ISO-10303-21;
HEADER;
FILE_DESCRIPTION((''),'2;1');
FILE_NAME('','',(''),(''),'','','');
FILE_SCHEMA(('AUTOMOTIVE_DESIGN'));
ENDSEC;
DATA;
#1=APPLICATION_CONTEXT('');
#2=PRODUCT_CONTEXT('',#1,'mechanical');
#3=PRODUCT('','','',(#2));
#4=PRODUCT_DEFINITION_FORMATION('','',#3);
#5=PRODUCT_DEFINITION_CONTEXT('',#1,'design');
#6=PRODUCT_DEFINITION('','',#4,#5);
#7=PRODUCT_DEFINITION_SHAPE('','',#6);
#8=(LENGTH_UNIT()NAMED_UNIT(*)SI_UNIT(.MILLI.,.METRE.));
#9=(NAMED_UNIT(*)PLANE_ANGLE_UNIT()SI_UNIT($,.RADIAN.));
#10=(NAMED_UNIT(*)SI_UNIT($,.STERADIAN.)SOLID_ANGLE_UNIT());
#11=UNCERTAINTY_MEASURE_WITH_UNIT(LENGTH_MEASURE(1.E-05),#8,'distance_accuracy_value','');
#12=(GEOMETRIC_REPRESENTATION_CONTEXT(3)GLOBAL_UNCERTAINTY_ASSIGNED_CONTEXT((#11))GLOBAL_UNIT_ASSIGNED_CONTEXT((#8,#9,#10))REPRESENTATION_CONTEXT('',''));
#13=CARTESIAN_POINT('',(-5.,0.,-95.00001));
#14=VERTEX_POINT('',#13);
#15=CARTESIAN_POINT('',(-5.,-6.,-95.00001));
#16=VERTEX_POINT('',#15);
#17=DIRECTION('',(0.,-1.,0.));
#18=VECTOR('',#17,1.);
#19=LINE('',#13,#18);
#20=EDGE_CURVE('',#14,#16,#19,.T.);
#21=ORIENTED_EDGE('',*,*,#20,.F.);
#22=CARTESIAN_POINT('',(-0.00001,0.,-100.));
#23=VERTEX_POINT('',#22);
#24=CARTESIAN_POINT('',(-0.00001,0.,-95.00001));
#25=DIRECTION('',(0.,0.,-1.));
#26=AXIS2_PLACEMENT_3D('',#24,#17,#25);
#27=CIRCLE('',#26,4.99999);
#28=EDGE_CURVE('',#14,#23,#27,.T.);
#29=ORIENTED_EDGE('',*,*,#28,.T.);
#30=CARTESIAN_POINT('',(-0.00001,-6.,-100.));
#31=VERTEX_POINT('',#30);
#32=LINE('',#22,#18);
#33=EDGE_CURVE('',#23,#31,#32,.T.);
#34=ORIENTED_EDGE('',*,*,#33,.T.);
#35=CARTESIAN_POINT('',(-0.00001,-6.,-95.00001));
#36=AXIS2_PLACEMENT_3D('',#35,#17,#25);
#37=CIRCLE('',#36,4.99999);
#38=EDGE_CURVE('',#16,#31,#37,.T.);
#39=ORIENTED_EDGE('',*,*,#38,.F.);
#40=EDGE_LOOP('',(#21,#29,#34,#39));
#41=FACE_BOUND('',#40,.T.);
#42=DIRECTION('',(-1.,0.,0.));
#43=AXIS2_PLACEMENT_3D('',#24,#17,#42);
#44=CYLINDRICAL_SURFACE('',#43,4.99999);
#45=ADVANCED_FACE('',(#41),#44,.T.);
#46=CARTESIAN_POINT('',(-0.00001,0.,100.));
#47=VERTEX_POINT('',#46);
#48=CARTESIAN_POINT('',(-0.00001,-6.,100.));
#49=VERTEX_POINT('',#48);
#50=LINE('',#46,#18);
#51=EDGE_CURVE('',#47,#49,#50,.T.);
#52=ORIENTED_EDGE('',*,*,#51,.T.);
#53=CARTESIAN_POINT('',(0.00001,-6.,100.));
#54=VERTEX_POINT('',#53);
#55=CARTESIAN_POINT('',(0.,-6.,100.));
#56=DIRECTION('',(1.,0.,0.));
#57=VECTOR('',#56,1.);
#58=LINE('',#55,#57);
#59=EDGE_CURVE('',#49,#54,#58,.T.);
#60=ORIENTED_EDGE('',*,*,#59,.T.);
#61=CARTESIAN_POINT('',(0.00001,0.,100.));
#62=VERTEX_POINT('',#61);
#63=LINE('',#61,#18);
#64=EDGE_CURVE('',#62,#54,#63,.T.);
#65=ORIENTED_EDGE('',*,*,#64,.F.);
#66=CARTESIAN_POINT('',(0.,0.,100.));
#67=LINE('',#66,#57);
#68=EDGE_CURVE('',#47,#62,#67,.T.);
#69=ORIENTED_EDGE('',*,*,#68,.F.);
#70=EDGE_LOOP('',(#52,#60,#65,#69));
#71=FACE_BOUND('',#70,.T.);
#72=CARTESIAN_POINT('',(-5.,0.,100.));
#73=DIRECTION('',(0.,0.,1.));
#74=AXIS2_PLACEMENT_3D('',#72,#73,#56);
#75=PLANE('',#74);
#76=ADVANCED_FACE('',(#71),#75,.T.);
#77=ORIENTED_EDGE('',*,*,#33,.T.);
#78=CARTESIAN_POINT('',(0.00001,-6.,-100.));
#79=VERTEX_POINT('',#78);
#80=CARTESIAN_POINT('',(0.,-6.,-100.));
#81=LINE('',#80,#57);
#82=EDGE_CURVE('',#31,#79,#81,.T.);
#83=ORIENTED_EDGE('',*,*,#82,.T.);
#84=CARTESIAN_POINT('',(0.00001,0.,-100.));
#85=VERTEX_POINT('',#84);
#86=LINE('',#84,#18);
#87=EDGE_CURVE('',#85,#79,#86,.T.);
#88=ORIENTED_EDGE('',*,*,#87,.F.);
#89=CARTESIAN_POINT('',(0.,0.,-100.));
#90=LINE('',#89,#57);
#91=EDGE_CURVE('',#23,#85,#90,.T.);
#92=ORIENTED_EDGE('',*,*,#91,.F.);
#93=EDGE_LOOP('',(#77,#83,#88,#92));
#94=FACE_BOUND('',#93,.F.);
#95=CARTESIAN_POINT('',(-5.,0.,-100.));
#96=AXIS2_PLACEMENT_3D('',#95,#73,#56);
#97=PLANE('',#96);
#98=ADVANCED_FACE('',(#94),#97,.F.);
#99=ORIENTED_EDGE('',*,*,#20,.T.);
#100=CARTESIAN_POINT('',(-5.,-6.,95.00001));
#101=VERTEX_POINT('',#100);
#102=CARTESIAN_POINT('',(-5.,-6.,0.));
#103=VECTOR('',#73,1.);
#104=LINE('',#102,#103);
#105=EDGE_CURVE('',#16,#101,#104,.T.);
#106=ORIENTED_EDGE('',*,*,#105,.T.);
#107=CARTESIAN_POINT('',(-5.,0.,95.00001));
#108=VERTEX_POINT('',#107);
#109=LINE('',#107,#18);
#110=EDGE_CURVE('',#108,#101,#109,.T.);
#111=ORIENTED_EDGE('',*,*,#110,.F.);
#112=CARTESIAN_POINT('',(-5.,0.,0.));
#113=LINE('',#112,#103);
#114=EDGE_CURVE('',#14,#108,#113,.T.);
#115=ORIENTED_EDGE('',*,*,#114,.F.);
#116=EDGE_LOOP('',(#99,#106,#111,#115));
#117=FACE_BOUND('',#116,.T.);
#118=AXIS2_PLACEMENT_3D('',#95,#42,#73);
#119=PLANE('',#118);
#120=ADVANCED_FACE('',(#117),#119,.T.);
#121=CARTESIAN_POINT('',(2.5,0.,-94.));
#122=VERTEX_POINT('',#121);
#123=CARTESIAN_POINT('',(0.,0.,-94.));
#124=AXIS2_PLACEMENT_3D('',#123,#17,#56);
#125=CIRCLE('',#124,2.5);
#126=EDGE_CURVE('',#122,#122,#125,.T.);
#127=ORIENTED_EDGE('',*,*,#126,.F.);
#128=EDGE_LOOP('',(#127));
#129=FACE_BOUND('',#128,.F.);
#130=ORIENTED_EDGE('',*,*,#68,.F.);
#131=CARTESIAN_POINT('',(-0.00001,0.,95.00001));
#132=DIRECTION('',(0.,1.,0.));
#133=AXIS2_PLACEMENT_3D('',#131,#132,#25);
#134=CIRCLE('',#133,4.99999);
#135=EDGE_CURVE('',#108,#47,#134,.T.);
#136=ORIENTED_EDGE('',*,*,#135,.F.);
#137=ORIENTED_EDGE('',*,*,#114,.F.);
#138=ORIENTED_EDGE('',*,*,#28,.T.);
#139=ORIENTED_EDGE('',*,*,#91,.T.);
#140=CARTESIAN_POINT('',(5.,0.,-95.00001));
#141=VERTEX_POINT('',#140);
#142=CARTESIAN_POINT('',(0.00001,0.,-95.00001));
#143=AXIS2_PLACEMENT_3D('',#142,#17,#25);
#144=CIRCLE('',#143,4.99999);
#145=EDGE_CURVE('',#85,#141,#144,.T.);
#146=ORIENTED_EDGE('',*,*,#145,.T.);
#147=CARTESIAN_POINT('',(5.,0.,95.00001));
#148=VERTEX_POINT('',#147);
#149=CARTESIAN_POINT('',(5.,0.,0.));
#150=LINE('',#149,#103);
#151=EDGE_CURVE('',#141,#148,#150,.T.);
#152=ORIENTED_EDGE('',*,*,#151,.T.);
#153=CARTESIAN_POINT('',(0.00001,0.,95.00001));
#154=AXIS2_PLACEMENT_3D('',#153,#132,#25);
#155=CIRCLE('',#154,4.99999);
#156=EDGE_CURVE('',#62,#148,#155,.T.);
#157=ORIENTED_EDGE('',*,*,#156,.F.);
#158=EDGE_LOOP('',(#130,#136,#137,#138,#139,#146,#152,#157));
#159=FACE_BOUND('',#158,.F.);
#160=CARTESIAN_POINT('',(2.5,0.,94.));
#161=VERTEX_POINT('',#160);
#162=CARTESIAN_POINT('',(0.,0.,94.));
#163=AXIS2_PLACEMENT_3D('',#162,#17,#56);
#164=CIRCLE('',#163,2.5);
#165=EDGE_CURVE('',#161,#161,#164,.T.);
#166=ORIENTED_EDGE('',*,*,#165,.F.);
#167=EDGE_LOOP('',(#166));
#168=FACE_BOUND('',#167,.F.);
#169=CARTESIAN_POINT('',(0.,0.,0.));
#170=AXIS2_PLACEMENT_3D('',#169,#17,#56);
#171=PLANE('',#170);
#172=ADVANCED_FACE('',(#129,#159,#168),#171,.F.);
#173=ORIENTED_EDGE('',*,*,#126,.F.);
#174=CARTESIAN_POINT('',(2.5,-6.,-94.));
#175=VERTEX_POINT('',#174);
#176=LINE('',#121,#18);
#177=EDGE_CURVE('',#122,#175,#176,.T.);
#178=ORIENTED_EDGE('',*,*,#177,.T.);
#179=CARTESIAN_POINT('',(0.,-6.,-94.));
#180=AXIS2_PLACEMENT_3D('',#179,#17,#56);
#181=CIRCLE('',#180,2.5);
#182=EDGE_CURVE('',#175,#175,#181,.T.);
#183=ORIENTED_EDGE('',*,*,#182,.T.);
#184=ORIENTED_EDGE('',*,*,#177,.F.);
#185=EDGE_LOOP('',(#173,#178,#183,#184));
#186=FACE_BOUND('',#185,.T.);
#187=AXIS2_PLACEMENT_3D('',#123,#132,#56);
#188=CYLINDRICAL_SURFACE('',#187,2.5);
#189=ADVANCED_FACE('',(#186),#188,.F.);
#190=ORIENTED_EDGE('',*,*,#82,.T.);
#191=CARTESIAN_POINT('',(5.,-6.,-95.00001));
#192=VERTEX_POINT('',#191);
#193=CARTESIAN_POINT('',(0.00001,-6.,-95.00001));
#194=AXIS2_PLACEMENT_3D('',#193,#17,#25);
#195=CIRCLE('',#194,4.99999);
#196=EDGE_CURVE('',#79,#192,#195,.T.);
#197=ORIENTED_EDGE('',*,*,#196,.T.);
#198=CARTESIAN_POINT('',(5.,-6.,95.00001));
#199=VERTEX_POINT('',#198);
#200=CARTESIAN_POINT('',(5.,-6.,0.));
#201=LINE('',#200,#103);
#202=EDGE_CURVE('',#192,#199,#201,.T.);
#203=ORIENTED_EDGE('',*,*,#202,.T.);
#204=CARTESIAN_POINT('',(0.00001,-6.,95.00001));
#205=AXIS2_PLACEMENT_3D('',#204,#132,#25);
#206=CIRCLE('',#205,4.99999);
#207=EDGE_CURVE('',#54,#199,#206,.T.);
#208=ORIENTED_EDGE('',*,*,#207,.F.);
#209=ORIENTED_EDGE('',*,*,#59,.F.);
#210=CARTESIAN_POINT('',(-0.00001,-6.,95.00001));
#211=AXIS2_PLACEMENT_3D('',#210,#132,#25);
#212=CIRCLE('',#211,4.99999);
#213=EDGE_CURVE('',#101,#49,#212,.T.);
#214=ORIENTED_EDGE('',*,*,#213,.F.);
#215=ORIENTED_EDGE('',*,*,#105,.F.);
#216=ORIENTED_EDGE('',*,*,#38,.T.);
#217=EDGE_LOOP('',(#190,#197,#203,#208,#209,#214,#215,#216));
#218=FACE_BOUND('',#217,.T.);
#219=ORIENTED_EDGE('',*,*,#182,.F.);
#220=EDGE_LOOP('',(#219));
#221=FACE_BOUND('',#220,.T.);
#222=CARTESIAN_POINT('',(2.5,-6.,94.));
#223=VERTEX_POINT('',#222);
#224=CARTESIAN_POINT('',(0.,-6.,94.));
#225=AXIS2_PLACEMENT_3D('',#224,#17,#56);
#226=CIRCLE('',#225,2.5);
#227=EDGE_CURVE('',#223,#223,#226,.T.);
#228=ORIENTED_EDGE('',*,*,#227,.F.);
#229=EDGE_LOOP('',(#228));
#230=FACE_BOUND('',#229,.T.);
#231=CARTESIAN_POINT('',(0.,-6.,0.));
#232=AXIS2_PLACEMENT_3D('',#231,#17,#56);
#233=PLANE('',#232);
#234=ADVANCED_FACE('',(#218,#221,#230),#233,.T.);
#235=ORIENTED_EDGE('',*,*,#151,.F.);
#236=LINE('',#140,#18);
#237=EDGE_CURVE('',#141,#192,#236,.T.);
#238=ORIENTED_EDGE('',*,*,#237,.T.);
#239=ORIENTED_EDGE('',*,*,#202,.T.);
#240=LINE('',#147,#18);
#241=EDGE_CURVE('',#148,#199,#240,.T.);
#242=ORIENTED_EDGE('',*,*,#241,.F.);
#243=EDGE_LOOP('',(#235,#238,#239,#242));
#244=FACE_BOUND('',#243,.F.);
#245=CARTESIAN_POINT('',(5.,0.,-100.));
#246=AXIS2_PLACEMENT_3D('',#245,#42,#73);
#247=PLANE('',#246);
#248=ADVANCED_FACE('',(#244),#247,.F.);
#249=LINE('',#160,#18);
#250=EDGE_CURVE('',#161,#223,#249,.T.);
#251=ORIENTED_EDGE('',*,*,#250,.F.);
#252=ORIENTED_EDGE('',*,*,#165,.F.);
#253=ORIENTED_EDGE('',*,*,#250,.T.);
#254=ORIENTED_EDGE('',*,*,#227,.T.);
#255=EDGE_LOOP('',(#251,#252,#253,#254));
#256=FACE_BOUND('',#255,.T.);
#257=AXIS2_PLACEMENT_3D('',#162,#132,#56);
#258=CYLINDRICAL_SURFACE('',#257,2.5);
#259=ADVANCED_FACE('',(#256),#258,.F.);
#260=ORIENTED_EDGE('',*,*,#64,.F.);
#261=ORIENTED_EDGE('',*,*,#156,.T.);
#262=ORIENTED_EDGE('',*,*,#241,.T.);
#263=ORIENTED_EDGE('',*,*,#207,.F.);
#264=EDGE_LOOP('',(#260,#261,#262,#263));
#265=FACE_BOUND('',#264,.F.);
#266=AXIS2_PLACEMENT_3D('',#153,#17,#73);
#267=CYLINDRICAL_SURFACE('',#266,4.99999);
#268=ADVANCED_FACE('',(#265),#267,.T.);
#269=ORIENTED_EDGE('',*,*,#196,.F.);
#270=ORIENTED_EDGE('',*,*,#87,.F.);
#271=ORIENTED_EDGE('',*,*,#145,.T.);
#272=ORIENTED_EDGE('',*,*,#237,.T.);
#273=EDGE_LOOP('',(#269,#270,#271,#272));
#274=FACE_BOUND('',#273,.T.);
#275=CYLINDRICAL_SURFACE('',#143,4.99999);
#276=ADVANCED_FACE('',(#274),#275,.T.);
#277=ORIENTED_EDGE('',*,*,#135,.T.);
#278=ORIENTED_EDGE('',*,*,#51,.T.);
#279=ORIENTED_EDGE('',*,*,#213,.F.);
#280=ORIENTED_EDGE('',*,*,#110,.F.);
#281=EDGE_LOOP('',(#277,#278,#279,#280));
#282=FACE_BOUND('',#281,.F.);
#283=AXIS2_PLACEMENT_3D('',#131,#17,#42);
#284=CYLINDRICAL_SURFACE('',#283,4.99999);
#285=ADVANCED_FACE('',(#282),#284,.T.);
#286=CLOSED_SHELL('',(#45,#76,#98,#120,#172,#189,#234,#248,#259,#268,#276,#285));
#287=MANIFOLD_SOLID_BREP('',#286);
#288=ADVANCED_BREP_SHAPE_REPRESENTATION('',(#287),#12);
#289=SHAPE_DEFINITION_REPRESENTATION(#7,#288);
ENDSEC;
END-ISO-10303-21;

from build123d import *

# Parameters (mm, degrees)
F0_W     = 10
F0_H     = 200
F0_R     = 2.5
F1_DEPTH = 6
F2_R     = 4.99999


# Not quite as in the source:
# - a fillet or chamfer is up to 0.001 mm smaller than in the source, because OpenCascade refuses the exact size


with BuildPart() as f1:
    # F0 (on Front) → F1 (new body)
    with BuildSketch(Plane.XZ):
        Rectangle(F0_W, F0_H)
        with Locations((0, -94)):
            Circle(F0_R, mode=Mode.SUBTRACT)
        with Locations((0, 94)):
            Circle(F0_R, mode=Mode.SUBTRACT)
    extrude(amount=F1_DEPTH)

    # F2 (radius 5 in the source; OpenCascade refuses exactly that, so slightly less here)
    f2_edges = [f1.edges().sort_by_distance(p)[0] for p in [
        (-5, -3, 100),
        (5, -3, 100),
        (5, -3, -100),
        (-5, -3, -100),
    ]]
    fillet(f2_edges, radius=F2_R)


solid = f1.part
